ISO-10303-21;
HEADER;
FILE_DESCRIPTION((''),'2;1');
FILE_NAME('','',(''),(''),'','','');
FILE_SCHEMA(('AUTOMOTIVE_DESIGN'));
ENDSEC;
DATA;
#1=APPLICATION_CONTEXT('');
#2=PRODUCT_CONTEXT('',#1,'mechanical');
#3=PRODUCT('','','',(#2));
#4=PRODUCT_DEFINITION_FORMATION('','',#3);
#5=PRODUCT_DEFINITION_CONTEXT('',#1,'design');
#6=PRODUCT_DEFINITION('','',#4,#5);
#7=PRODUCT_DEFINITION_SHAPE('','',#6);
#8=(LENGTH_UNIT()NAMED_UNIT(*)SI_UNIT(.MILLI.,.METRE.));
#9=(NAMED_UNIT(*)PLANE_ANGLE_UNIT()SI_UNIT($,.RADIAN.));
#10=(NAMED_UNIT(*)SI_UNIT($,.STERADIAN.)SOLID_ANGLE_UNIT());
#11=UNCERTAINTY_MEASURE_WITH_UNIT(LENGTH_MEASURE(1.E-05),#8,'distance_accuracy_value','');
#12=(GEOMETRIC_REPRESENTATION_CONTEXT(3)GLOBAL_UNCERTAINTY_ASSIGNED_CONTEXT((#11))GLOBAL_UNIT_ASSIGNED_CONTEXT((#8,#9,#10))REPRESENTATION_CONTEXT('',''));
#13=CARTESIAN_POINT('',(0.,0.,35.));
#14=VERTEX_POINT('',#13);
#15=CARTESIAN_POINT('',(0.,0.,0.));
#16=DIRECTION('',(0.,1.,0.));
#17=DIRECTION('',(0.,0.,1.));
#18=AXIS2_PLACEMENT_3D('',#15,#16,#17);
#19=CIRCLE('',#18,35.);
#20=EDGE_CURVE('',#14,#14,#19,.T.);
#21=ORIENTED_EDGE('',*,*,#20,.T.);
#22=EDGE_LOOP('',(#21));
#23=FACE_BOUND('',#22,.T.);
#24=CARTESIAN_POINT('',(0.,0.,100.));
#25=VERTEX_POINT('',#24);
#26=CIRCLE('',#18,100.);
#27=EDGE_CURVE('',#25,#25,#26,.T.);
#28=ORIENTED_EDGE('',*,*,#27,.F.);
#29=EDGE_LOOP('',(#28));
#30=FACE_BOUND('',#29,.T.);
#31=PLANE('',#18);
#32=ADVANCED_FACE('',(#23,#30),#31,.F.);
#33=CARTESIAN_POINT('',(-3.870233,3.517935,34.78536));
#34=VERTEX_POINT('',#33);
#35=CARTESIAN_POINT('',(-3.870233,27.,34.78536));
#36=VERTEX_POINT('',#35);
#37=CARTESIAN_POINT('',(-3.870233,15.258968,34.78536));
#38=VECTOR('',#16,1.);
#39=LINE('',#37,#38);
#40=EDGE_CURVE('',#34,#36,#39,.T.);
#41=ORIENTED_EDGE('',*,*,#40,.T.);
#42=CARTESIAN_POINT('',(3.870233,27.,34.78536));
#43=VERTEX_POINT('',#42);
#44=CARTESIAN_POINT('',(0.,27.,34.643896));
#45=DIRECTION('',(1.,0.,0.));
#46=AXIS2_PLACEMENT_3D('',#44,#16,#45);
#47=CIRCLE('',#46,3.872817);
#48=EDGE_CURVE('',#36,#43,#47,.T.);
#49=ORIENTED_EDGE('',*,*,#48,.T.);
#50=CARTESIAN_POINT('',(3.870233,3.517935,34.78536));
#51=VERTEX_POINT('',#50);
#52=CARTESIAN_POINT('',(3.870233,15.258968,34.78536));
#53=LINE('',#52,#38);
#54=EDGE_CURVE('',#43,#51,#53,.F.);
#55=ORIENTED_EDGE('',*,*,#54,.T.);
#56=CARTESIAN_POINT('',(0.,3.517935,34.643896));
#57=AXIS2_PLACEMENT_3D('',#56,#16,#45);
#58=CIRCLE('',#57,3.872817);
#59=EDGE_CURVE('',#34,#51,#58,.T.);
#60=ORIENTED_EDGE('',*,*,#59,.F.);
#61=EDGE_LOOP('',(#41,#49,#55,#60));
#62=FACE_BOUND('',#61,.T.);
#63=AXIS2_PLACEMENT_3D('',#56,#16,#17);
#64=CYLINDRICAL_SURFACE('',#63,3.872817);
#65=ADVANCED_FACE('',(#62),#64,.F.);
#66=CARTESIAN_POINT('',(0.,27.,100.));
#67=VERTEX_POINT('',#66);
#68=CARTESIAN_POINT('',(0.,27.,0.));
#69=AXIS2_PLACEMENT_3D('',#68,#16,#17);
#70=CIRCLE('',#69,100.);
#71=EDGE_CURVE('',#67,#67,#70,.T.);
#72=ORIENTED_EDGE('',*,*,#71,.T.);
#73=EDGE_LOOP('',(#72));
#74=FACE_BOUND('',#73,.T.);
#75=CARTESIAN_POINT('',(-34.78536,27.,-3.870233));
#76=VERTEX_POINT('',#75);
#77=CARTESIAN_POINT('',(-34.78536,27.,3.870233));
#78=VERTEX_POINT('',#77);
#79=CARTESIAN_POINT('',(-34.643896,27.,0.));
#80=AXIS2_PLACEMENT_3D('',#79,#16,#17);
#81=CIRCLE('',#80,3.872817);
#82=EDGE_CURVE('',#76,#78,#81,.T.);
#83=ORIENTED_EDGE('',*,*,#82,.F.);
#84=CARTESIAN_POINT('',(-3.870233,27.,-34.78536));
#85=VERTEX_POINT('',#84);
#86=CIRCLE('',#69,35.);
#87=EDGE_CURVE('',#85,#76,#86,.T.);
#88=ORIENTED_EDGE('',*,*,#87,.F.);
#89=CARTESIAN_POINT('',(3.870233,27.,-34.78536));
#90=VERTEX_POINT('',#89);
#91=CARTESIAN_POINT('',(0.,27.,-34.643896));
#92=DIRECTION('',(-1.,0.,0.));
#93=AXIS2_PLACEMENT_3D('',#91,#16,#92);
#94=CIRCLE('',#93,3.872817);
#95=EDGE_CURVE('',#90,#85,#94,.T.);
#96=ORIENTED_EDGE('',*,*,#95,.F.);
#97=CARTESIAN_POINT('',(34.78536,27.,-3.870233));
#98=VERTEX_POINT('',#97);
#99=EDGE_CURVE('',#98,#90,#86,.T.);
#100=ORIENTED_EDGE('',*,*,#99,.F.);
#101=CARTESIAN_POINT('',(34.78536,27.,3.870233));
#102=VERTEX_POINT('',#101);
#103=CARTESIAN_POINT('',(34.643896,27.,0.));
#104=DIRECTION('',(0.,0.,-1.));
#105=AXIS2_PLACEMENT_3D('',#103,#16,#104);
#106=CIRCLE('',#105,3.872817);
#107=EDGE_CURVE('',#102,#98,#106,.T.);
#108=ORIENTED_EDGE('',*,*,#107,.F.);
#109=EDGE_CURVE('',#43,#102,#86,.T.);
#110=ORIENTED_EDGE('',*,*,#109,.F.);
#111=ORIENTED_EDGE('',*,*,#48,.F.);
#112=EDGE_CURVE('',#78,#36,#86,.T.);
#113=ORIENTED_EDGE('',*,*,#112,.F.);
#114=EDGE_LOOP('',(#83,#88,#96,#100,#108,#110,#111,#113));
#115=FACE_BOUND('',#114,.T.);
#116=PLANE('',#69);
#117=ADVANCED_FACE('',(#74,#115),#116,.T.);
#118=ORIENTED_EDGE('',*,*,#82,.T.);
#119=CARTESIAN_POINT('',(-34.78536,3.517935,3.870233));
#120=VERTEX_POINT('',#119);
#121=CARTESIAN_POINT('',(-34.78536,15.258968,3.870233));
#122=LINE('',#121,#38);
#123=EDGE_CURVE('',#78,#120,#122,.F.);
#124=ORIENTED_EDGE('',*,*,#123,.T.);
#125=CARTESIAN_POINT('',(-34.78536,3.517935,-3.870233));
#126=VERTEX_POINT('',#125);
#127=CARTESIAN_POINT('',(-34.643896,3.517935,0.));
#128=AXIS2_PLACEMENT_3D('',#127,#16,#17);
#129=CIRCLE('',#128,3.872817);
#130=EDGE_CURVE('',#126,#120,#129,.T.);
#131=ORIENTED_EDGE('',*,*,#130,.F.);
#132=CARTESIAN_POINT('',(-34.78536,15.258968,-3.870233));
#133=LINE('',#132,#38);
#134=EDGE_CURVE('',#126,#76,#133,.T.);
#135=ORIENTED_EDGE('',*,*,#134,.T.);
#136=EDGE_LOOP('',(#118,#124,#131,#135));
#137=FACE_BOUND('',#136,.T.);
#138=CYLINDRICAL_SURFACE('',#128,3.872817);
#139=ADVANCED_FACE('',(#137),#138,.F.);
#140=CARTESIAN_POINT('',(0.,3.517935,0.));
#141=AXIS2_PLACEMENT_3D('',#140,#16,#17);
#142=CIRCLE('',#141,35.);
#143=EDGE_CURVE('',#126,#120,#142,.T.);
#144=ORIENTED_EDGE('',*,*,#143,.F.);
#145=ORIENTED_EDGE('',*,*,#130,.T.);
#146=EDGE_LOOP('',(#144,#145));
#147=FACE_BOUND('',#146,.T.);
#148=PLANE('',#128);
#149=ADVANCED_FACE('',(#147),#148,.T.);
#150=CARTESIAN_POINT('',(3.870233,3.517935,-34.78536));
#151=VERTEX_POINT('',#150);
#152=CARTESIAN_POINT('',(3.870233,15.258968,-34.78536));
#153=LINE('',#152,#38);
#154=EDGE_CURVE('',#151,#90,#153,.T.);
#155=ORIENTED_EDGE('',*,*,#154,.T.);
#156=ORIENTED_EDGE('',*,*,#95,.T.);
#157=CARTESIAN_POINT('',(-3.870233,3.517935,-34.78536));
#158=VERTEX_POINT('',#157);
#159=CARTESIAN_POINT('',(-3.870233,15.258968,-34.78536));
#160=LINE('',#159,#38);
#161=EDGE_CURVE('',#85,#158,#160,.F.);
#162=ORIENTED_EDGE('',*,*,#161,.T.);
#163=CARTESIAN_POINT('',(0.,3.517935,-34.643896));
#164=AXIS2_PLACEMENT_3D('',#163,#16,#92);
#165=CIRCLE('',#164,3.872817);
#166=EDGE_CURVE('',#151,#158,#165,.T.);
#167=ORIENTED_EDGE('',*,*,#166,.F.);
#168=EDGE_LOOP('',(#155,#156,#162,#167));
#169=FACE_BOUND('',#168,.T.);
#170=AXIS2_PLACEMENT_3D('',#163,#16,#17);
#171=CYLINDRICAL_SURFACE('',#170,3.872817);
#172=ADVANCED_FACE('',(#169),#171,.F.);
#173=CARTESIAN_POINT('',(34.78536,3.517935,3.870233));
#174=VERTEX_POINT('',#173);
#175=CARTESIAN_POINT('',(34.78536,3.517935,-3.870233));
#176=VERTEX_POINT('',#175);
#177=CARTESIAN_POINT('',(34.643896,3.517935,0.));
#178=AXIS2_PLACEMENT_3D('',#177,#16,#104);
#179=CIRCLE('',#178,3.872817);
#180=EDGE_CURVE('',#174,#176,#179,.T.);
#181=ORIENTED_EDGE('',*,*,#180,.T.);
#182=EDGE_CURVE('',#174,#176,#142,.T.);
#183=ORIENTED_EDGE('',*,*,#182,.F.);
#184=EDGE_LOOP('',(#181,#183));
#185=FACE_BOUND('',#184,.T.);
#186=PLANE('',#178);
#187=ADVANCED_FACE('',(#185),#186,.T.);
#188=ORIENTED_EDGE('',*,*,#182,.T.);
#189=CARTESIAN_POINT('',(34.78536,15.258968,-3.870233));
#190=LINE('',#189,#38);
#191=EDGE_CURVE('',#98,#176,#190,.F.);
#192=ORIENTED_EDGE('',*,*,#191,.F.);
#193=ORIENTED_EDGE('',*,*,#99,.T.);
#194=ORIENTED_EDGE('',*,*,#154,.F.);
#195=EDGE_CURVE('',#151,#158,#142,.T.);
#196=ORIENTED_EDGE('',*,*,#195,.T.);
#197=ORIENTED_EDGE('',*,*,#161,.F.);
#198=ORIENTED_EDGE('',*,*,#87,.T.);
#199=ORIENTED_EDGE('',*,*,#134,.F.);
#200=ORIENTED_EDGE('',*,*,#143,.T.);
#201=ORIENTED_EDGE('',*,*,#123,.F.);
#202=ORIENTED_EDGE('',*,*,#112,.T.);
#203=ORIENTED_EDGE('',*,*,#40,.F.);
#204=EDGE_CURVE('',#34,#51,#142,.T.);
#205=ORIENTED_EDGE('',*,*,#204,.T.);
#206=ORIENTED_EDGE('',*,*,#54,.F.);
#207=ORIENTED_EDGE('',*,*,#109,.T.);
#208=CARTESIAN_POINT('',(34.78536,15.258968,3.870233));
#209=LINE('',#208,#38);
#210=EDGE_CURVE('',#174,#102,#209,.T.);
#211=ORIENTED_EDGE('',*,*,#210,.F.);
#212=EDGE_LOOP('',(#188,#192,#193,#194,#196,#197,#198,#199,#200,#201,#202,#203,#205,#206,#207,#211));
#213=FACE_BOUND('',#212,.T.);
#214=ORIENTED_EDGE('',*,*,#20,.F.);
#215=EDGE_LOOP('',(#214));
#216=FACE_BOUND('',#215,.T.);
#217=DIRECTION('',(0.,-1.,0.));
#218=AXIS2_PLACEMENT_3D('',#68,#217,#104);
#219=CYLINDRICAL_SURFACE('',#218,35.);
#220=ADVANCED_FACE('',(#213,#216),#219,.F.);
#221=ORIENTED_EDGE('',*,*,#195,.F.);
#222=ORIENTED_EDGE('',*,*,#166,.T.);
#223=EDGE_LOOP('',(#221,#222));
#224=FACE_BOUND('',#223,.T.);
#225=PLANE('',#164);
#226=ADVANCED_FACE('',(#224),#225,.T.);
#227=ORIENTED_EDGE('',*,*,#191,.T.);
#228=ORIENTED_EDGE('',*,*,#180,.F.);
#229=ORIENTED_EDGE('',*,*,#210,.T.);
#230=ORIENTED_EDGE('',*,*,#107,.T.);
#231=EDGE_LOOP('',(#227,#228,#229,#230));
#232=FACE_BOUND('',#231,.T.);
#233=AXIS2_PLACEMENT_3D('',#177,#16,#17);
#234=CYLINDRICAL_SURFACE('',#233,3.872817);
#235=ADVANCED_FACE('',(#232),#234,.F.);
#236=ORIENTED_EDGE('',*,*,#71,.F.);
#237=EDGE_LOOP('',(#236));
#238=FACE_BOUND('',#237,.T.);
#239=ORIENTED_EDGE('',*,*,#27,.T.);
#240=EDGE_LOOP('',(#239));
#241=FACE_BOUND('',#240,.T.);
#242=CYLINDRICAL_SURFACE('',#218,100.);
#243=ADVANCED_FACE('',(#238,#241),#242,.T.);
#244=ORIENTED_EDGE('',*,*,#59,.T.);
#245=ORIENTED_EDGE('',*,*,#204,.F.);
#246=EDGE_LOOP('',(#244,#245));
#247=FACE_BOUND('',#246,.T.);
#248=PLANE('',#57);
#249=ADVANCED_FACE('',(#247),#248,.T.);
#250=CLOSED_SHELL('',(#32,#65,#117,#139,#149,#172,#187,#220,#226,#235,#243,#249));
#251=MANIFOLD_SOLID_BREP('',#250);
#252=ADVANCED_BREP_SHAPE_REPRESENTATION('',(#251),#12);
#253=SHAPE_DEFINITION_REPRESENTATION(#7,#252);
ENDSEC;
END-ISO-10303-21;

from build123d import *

# Parameters (mm, degrees)
SKETCH1_R           = 100
BOSS_EXTRUDE1_DEPTH = 27
SKETCH2_R           = 35
CUT_EXTRUDE1_DEPTH  = 144.975692393
SKETCH3_R           = 3.87281734
CUT_EXTRUDE2_DEPTH  = 23.482064542
CIRPATTERN1_COUNT   = 4


with BuildPart() as part:
    # Sketch1 → Boss-Extrude1 (new body)
    with BuildSketch(Plane(origin=(0, 0, 0), x_dir=(1, 0, 0), z_dir=(0, 1, 0))):
        Circle(SKETCH1_R)
    extrude(amount=BOSS_EXTRUDE1_DEPTH)

    # Sketch2 → Cut-Extrude1 (cut, through all)
    with BuildSketch(Plane(origin=(0, 0, 0), x_dir=(1, 0, 0), z_dir=(0, 1, 0))):
        Circle(SKETCH2_R)
    extrude(amount=CUT_EXTRUDE1_DEPTH, mode=Mode.SUBTRACT)

    # Sketch3 → Cut-Extrude2 (cut)
    with BuildSketch(Plane(origin=(0, 27, 0), x_dir=(1, 0, 0), z_dir=(0, 1, 0))):
        with Locations((-34.643895565, 0)):
            Circle(SKETCH3_R)
    cut_extrude2 = extrude(amount=-CUT_EXTRUDE2_DEPTH, mode=Mode.SUBTRACT)

    # CirPattern1: Cut-Extrude2 ×4 about axis
    cirpattern1_axis = Axis((0, 0, 0), (0, 1, 0))
    for i in range(1, CIRPATTERN1_COUNT):
        add(cut_extrude2.rotate(cirpattern1_axis, i * 360 / CIRPATTERN1_COUNT), mode=Mode.SUBTRACT)


solid = part.part
